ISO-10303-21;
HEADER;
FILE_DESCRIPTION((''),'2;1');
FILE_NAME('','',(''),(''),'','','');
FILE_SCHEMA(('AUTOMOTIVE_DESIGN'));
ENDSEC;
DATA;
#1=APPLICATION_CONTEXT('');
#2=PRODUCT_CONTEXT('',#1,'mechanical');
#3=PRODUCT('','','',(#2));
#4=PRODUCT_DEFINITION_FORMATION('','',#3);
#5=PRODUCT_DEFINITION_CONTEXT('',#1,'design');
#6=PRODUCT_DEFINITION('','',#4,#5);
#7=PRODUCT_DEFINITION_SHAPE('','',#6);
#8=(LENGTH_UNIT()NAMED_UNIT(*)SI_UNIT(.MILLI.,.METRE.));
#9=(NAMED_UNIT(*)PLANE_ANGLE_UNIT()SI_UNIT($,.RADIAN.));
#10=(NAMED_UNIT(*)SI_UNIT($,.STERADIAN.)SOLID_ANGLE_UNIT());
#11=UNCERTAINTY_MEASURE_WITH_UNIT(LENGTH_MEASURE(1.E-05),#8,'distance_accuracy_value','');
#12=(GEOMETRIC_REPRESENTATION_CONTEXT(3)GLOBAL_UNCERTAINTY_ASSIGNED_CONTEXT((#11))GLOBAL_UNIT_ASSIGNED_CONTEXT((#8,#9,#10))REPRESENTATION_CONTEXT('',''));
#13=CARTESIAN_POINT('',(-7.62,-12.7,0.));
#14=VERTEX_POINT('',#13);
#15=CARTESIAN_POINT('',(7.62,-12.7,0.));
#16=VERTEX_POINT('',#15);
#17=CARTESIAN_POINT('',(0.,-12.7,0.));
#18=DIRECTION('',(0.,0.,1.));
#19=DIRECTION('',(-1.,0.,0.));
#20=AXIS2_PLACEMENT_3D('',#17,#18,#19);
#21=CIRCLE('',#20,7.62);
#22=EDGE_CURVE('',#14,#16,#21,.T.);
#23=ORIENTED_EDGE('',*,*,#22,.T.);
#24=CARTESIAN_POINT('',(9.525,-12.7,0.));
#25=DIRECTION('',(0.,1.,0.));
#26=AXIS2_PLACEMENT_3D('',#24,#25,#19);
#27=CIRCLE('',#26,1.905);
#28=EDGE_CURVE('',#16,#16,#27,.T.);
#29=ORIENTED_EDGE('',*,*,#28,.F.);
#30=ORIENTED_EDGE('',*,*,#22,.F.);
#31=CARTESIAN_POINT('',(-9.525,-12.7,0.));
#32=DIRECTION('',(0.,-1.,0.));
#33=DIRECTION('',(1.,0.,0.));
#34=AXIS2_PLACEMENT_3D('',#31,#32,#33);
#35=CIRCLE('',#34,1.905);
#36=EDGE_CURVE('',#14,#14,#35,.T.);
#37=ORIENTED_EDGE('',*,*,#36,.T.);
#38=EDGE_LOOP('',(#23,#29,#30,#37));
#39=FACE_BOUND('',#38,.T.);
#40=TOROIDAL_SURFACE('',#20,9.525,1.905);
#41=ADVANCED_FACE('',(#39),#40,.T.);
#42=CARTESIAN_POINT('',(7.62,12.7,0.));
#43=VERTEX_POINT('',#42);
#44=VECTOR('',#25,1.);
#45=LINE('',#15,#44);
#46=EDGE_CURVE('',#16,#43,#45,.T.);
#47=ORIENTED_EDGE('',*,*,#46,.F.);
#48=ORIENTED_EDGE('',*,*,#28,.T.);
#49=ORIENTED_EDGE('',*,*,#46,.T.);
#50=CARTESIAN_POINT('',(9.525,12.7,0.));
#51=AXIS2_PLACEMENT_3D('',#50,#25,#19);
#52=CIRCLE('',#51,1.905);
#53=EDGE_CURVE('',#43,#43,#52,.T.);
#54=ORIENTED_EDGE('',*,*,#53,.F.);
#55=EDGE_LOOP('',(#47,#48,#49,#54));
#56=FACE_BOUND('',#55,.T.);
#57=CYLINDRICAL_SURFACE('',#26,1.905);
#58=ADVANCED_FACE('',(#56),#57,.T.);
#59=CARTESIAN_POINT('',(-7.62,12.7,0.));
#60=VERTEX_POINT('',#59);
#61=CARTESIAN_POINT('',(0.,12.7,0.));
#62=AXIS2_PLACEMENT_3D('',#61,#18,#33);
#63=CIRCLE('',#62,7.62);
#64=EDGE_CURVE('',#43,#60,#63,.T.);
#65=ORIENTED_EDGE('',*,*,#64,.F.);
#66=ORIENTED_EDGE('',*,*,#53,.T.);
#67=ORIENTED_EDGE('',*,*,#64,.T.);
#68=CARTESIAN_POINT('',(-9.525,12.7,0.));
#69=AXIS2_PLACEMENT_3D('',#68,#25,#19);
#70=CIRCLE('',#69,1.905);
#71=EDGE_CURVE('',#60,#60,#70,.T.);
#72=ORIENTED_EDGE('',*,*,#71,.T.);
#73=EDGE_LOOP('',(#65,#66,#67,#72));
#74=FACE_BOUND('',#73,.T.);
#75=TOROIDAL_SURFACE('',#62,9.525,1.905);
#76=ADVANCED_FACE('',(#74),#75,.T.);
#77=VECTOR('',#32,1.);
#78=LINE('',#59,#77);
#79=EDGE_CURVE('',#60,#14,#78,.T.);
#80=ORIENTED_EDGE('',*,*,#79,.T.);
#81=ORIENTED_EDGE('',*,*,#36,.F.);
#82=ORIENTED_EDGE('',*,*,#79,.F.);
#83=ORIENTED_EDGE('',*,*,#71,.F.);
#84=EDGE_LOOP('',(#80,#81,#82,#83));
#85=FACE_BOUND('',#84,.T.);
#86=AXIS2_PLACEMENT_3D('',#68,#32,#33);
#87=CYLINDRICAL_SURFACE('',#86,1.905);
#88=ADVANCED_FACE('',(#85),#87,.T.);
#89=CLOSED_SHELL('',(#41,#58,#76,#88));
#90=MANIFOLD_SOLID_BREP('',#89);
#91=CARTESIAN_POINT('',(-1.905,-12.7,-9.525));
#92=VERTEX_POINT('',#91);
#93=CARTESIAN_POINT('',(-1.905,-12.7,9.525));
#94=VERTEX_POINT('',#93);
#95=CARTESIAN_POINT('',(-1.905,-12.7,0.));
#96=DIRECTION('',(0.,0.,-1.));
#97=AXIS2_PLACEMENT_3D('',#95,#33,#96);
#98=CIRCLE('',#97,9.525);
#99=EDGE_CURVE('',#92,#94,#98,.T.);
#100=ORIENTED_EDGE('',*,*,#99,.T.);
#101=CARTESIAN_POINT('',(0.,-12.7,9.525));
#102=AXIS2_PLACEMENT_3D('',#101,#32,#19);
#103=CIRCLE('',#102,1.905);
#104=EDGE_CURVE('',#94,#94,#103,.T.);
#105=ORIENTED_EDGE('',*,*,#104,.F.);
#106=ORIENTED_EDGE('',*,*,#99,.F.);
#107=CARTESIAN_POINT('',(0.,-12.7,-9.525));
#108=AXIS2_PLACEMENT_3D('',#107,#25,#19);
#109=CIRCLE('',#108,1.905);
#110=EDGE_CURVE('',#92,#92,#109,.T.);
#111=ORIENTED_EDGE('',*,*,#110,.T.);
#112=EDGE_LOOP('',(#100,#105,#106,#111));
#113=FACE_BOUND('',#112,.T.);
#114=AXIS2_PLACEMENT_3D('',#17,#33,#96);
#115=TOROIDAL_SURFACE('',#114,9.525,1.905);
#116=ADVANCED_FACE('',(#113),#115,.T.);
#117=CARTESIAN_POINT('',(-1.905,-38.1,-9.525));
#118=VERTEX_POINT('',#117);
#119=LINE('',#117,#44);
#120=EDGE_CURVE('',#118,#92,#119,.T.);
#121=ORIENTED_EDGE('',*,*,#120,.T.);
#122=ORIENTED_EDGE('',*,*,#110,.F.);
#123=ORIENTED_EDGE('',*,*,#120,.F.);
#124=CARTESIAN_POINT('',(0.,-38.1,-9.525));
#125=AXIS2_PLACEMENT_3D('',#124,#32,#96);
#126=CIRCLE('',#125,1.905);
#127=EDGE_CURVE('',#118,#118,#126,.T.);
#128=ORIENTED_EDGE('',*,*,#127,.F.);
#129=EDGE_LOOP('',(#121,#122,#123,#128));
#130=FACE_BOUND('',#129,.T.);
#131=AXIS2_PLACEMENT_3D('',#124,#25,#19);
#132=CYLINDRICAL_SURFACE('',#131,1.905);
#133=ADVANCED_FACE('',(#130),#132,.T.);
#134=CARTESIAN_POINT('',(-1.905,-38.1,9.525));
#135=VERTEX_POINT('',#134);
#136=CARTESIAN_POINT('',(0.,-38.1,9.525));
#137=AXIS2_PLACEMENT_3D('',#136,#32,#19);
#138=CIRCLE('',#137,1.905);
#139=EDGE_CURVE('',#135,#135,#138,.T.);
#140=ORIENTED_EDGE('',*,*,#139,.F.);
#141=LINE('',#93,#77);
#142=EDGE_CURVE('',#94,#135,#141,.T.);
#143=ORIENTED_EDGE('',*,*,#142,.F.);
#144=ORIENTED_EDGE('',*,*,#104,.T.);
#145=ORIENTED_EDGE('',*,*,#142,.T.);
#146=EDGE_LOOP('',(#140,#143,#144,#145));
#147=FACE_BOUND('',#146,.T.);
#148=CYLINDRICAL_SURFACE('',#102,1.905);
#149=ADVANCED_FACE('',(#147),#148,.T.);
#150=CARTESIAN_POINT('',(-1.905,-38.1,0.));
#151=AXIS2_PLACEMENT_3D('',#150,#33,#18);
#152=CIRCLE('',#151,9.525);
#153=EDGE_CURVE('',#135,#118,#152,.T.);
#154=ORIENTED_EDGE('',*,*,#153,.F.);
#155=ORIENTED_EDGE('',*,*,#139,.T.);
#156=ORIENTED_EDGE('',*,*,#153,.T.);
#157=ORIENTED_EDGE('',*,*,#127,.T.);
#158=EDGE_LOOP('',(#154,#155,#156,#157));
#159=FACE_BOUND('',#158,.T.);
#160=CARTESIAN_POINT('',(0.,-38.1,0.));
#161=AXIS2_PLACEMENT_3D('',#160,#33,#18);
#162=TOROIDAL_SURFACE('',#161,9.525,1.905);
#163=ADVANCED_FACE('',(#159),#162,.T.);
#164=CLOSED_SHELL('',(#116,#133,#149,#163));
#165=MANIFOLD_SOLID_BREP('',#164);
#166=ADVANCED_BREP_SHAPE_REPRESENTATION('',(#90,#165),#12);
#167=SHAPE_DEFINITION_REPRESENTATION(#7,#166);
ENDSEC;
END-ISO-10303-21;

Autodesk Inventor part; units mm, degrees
ref_plane "YZ Plane" through (0, 0, 0) normal (1, 0, 0) x (0, 1, 0)
sketch "Sketch1" plane through (0, 0, 0) normal (0, 0, 1) x (1, 0, 0)
  line L0 (0, -12.7) -> (0, 12.7)
  line L1 (9.525, -12.7) -> (9.525, 12.7)
  line L2 (-9.525, 12.7) -> (-9.525, -12.7)
  arc A0 (-9.525, -12.7) -> (9.525, -12.7) centre (0, -12.7) ccw
  arc A1 (9.525, 12.7) -> (-9.525, 12.7) centre (0, 12.7) ccw
  point P0 (0, 0)
  dimension "d1" = 9.525
  dimension "d2" = 25.4
ref_plane "Work Plane1" through (9.525, 12.7, 0) normal (0, 1, 0) x (-1, 0, 0)
sketch "Sketch2" plane through (9.525, 12.7, 0) normal (0, 1, 0) x (-1, 0, 0)
  circle A0 centre (0, 0) radius 1.905
  point P0 (9.525, 0)
  point P1 (0, 0)
  dimension "d3" = 3.81
sweep "Sweep1" add profiles "Sketch2" path "Sketch1" path curves L1 A0 L2 A1
sketch "Sketch3" plane through (0, 0, 0) normal (1, 0, 0) x (0, 1, 0)
  line L0 (-38.1, -9.525) -> (-12.7, -9.525)
  line L1 (-12.7, 9.525) -> (-38.1, 9.525)
  arc A0 (-38.1, 9.525) -> (-38.1, -9.525) centre (-38.1, 0) ccw
  arc A1 (-12.7, -9.525) -> (-12.7, 9.525) centre (-12.7, 0) ccw
  line L2 (-12.7, 1.905) -> (-12.7, -1.905) projected
  point P0 (0, 0)
  point P1 (0, 0)
  dimension "d6" = 9.525
  dimension "d7" = 25.4
ref_plane "Work Plane2" through (0, -12.7, 0) normal (0, 1, 0) x (-1, 0, 0)
sketch "Sketch4" plane through (0, -12.7, 0) normal (0, 1, 0) x (-1, 0, 0)
  circle A0 centre (0, 9.525) radius 1.905
  point P0 (0, 0)
  point P1 (9.525, 0)
  point P2 (0, 0)
  point P3 (0, 0)
  point P4 (0, 0)
  point P5 (0, 9.525)
  dimension "d10" = 3.81
sweep "Sweep2" add profiles "Sketch4" path "Sketch3" path curves L1 A0 L0 A1
pattern_of_one "Rectangular Pattern1"
properties part number "Single Chain Link"
